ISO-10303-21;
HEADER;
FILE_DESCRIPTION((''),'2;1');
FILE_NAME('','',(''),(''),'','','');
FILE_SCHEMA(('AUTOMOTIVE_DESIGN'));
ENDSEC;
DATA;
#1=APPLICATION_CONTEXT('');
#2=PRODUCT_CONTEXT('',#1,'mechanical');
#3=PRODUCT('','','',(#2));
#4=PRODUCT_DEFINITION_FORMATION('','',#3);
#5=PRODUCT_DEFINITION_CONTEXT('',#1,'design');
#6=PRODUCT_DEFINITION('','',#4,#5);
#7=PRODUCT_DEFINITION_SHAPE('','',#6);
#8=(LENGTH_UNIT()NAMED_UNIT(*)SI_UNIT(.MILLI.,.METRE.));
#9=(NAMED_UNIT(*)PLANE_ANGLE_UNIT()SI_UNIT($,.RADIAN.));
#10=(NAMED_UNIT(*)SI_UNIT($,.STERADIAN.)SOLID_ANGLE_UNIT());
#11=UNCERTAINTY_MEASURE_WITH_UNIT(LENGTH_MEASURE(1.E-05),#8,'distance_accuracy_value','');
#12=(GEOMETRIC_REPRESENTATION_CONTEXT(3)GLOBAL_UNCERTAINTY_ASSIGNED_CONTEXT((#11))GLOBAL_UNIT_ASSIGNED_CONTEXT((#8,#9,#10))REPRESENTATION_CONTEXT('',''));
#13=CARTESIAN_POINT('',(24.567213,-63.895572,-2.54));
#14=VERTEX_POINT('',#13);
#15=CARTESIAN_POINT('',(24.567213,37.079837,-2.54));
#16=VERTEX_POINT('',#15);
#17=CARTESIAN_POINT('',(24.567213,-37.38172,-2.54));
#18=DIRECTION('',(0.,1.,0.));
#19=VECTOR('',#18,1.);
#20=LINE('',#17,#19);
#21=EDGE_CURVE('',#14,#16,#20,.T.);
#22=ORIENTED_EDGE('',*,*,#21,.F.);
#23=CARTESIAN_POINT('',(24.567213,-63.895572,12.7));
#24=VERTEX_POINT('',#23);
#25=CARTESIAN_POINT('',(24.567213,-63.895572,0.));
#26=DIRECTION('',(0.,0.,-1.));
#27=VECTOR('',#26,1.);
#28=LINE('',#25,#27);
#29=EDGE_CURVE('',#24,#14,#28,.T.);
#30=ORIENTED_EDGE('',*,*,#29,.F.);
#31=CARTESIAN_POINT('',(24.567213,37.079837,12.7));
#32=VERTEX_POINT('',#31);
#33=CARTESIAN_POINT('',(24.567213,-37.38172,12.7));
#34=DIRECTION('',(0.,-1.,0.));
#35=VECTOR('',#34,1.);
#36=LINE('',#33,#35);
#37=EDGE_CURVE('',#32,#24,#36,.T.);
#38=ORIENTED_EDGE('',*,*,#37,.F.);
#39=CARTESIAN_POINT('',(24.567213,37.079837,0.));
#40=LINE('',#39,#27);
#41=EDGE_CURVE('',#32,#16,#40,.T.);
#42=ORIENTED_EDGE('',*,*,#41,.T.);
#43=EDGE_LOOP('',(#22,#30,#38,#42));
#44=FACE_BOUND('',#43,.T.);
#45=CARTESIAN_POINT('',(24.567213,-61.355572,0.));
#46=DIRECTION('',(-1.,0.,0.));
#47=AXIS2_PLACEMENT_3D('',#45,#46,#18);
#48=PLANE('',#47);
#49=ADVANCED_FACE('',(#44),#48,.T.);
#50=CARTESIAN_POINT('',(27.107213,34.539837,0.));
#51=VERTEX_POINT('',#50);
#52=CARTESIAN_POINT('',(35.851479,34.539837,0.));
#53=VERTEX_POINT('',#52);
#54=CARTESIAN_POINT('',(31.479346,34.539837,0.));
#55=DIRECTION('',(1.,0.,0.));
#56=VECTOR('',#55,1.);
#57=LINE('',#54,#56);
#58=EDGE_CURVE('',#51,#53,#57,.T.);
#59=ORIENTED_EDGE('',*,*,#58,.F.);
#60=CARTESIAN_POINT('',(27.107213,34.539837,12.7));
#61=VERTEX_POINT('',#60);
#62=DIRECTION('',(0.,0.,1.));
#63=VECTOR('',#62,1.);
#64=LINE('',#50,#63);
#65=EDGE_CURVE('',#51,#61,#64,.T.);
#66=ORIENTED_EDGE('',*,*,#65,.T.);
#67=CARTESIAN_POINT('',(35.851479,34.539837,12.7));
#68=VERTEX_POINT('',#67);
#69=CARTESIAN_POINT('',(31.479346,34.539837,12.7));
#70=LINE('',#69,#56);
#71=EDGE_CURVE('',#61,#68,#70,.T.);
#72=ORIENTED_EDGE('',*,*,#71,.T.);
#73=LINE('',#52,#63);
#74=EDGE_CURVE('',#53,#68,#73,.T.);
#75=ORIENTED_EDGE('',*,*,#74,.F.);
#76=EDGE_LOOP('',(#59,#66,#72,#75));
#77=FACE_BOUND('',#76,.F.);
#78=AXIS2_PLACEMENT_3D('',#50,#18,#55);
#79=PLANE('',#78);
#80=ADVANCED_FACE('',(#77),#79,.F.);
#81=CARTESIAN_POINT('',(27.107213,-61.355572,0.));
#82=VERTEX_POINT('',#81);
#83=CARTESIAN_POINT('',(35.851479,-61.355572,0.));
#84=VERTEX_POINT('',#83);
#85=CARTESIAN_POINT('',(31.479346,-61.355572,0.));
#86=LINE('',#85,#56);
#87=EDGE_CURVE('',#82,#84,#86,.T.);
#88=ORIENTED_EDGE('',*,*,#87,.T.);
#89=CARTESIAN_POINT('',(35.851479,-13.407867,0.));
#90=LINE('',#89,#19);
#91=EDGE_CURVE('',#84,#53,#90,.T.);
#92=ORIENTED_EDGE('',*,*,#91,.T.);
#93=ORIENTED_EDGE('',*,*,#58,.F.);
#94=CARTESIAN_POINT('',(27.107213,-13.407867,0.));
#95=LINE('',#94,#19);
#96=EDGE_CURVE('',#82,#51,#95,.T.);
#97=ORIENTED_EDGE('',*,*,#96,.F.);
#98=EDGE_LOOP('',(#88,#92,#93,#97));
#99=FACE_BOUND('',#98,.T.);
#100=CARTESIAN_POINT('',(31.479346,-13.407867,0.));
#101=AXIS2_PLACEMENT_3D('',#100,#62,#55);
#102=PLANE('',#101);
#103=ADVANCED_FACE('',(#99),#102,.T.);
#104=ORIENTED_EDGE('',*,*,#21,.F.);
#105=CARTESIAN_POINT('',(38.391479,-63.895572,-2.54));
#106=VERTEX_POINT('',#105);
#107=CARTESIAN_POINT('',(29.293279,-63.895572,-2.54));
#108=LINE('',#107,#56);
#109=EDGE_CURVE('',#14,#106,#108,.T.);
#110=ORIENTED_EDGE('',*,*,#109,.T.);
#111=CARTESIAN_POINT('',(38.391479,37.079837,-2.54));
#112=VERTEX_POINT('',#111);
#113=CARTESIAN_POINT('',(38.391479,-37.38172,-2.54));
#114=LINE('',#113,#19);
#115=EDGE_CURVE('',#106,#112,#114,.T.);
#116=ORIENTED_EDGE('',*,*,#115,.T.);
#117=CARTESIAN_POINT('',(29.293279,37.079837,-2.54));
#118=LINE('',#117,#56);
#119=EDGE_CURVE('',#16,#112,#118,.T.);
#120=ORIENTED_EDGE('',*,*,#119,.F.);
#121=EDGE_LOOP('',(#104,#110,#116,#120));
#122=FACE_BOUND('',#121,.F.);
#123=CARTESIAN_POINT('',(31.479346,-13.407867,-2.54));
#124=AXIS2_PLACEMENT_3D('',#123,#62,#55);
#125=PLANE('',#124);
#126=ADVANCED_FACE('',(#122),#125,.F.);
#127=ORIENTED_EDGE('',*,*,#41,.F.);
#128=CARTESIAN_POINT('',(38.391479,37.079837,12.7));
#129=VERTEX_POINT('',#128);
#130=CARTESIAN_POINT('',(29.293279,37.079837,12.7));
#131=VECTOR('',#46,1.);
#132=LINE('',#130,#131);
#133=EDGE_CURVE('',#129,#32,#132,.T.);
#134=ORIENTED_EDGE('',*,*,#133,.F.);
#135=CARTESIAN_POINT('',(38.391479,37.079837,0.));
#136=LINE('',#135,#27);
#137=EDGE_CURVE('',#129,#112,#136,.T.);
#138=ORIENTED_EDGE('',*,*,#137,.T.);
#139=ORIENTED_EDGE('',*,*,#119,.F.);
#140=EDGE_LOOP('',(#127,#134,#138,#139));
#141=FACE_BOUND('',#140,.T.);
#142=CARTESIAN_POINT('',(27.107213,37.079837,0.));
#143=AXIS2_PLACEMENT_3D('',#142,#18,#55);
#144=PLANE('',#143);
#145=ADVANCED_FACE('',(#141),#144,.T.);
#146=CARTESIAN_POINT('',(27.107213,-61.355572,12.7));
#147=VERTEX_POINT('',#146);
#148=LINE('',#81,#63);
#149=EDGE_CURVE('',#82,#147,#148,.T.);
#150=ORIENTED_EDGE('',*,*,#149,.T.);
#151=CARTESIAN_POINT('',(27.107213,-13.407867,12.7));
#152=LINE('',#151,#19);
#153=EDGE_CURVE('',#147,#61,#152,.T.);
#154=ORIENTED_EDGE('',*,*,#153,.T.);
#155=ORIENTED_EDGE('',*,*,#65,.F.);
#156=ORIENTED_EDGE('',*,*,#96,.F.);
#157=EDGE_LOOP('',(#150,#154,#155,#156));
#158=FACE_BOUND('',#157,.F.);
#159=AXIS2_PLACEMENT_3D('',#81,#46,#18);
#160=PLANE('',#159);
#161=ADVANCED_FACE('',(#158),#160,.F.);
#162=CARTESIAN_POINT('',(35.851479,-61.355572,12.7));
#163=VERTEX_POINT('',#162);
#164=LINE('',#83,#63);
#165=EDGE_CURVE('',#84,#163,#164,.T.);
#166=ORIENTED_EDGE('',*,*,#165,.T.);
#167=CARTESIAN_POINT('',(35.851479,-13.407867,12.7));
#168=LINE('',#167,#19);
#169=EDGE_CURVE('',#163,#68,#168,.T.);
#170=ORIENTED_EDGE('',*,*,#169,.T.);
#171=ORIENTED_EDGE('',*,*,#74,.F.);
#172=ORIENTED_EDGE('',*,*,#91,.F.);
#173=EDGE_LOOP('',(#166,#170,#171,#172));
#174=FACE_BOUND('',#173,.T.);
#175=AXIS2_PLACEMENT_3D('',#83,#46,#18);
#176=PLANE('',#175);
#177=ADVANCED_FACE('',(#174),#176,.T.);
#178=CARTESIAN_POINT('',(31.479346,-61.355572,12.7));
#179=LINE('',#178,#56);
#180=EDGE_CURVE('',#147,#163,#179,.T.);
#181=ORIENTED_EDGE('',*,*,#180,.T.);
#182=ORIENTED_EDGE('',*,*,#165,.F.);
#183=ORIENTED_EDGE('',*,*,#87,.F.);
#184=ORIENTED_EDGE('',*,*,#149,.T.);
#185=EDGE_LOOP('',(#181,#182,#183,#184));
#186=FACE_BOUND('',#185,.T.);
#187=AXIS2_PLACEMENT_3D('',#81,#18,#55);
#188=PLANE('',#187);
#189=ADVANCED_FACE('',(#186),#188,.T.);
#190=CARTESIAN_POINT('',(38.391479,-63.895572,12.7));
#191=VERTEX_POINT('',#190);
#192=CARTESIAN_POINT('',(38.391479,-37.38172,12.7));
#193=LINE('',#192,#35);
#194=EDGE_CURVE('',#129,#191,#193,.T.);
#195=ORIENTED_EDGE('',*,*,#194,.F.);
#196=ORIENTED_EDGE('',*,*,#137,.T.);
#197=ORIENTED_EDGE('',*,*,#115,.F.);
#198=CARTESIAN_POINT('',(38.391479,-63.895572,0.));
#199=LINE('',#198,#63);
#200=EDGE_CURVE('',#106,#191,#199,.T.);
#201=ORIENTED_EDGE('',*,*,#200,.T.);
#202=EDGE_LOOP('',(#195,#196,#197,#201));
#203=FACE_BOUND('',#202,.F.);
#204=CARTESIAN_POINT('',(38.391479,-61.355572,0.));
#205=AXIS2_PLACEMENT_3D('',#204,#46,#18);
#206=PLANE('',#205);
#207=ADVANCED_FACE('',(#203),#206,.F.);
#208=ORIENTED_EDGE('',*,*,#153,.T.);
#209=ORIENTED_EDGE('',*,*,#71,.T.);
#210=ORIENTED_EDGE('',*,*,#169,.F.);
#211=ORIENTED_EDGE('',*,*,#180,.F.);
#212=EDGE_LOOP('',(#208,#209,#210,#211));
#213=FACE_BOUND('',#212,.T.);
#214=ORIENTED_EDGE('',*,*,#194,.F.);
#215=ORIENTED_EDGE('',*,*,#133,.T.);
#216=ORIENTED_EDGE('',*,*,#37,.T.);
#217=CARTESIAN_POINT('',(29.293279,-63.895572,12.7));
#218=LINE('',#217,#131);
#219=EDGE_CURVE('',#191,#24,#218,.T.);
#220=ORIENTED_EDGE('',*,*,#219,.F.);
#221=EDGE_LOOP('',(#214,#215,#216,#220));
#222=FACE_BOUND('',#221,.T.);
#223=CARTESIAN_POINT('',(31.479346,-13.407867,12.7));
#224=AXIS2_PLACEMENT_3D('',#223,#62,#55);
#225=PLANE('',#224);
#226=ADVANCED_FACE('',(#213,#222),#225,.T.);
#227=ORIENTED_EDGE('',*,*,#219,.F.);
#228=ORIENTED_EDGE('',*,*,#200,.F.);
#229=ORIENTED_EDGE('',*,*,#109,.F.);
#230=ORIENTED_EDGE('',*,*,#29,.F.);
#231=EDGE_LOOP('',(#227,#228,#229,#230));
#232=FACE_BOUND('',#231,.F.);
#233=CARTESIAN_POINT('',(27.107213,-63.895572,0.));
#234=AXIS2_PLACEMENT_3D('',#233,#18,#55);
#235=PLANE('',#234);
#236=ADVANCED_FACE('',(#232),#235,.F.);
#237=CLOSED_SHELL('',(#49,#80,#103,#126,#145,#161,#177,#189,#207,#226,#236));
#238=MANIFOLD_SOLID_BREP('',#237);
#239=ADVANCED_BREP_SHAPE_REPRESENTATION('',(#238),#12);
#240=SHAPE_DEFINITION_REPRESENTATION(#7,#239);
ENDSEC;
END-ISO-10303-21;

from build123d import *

# Parameters (mm, degrees)
F0_W     = 8.7442658842
F0_H     = 95.895409584
F1_DEPTH = 12.7
F4_T     = 2.54


# Not quite as in the source:
# - the program builds the solid bodies; features that only make, move or delete a surface that nothing else refers to are left out


with BuildPart() as f1:
    # F0 (on Top) → F1 (new body)
    with BuildSketch(Plane.XY):
        with Locations((31.4793456346, -13.4078674018)):
            Rectangle(F0_W, F0_H)
    extrude(amount=F1_DEPTH)

    # F4
    f4_openings = [f1.faces().sort_by_distance(p)[0] for p in [
        (31.479346, -13.407867, 12.7),
    ]]
    offset(amount=F4_T, openings=f4_openings, kind=Kind.INTERSECTION)


solid = f1.part
